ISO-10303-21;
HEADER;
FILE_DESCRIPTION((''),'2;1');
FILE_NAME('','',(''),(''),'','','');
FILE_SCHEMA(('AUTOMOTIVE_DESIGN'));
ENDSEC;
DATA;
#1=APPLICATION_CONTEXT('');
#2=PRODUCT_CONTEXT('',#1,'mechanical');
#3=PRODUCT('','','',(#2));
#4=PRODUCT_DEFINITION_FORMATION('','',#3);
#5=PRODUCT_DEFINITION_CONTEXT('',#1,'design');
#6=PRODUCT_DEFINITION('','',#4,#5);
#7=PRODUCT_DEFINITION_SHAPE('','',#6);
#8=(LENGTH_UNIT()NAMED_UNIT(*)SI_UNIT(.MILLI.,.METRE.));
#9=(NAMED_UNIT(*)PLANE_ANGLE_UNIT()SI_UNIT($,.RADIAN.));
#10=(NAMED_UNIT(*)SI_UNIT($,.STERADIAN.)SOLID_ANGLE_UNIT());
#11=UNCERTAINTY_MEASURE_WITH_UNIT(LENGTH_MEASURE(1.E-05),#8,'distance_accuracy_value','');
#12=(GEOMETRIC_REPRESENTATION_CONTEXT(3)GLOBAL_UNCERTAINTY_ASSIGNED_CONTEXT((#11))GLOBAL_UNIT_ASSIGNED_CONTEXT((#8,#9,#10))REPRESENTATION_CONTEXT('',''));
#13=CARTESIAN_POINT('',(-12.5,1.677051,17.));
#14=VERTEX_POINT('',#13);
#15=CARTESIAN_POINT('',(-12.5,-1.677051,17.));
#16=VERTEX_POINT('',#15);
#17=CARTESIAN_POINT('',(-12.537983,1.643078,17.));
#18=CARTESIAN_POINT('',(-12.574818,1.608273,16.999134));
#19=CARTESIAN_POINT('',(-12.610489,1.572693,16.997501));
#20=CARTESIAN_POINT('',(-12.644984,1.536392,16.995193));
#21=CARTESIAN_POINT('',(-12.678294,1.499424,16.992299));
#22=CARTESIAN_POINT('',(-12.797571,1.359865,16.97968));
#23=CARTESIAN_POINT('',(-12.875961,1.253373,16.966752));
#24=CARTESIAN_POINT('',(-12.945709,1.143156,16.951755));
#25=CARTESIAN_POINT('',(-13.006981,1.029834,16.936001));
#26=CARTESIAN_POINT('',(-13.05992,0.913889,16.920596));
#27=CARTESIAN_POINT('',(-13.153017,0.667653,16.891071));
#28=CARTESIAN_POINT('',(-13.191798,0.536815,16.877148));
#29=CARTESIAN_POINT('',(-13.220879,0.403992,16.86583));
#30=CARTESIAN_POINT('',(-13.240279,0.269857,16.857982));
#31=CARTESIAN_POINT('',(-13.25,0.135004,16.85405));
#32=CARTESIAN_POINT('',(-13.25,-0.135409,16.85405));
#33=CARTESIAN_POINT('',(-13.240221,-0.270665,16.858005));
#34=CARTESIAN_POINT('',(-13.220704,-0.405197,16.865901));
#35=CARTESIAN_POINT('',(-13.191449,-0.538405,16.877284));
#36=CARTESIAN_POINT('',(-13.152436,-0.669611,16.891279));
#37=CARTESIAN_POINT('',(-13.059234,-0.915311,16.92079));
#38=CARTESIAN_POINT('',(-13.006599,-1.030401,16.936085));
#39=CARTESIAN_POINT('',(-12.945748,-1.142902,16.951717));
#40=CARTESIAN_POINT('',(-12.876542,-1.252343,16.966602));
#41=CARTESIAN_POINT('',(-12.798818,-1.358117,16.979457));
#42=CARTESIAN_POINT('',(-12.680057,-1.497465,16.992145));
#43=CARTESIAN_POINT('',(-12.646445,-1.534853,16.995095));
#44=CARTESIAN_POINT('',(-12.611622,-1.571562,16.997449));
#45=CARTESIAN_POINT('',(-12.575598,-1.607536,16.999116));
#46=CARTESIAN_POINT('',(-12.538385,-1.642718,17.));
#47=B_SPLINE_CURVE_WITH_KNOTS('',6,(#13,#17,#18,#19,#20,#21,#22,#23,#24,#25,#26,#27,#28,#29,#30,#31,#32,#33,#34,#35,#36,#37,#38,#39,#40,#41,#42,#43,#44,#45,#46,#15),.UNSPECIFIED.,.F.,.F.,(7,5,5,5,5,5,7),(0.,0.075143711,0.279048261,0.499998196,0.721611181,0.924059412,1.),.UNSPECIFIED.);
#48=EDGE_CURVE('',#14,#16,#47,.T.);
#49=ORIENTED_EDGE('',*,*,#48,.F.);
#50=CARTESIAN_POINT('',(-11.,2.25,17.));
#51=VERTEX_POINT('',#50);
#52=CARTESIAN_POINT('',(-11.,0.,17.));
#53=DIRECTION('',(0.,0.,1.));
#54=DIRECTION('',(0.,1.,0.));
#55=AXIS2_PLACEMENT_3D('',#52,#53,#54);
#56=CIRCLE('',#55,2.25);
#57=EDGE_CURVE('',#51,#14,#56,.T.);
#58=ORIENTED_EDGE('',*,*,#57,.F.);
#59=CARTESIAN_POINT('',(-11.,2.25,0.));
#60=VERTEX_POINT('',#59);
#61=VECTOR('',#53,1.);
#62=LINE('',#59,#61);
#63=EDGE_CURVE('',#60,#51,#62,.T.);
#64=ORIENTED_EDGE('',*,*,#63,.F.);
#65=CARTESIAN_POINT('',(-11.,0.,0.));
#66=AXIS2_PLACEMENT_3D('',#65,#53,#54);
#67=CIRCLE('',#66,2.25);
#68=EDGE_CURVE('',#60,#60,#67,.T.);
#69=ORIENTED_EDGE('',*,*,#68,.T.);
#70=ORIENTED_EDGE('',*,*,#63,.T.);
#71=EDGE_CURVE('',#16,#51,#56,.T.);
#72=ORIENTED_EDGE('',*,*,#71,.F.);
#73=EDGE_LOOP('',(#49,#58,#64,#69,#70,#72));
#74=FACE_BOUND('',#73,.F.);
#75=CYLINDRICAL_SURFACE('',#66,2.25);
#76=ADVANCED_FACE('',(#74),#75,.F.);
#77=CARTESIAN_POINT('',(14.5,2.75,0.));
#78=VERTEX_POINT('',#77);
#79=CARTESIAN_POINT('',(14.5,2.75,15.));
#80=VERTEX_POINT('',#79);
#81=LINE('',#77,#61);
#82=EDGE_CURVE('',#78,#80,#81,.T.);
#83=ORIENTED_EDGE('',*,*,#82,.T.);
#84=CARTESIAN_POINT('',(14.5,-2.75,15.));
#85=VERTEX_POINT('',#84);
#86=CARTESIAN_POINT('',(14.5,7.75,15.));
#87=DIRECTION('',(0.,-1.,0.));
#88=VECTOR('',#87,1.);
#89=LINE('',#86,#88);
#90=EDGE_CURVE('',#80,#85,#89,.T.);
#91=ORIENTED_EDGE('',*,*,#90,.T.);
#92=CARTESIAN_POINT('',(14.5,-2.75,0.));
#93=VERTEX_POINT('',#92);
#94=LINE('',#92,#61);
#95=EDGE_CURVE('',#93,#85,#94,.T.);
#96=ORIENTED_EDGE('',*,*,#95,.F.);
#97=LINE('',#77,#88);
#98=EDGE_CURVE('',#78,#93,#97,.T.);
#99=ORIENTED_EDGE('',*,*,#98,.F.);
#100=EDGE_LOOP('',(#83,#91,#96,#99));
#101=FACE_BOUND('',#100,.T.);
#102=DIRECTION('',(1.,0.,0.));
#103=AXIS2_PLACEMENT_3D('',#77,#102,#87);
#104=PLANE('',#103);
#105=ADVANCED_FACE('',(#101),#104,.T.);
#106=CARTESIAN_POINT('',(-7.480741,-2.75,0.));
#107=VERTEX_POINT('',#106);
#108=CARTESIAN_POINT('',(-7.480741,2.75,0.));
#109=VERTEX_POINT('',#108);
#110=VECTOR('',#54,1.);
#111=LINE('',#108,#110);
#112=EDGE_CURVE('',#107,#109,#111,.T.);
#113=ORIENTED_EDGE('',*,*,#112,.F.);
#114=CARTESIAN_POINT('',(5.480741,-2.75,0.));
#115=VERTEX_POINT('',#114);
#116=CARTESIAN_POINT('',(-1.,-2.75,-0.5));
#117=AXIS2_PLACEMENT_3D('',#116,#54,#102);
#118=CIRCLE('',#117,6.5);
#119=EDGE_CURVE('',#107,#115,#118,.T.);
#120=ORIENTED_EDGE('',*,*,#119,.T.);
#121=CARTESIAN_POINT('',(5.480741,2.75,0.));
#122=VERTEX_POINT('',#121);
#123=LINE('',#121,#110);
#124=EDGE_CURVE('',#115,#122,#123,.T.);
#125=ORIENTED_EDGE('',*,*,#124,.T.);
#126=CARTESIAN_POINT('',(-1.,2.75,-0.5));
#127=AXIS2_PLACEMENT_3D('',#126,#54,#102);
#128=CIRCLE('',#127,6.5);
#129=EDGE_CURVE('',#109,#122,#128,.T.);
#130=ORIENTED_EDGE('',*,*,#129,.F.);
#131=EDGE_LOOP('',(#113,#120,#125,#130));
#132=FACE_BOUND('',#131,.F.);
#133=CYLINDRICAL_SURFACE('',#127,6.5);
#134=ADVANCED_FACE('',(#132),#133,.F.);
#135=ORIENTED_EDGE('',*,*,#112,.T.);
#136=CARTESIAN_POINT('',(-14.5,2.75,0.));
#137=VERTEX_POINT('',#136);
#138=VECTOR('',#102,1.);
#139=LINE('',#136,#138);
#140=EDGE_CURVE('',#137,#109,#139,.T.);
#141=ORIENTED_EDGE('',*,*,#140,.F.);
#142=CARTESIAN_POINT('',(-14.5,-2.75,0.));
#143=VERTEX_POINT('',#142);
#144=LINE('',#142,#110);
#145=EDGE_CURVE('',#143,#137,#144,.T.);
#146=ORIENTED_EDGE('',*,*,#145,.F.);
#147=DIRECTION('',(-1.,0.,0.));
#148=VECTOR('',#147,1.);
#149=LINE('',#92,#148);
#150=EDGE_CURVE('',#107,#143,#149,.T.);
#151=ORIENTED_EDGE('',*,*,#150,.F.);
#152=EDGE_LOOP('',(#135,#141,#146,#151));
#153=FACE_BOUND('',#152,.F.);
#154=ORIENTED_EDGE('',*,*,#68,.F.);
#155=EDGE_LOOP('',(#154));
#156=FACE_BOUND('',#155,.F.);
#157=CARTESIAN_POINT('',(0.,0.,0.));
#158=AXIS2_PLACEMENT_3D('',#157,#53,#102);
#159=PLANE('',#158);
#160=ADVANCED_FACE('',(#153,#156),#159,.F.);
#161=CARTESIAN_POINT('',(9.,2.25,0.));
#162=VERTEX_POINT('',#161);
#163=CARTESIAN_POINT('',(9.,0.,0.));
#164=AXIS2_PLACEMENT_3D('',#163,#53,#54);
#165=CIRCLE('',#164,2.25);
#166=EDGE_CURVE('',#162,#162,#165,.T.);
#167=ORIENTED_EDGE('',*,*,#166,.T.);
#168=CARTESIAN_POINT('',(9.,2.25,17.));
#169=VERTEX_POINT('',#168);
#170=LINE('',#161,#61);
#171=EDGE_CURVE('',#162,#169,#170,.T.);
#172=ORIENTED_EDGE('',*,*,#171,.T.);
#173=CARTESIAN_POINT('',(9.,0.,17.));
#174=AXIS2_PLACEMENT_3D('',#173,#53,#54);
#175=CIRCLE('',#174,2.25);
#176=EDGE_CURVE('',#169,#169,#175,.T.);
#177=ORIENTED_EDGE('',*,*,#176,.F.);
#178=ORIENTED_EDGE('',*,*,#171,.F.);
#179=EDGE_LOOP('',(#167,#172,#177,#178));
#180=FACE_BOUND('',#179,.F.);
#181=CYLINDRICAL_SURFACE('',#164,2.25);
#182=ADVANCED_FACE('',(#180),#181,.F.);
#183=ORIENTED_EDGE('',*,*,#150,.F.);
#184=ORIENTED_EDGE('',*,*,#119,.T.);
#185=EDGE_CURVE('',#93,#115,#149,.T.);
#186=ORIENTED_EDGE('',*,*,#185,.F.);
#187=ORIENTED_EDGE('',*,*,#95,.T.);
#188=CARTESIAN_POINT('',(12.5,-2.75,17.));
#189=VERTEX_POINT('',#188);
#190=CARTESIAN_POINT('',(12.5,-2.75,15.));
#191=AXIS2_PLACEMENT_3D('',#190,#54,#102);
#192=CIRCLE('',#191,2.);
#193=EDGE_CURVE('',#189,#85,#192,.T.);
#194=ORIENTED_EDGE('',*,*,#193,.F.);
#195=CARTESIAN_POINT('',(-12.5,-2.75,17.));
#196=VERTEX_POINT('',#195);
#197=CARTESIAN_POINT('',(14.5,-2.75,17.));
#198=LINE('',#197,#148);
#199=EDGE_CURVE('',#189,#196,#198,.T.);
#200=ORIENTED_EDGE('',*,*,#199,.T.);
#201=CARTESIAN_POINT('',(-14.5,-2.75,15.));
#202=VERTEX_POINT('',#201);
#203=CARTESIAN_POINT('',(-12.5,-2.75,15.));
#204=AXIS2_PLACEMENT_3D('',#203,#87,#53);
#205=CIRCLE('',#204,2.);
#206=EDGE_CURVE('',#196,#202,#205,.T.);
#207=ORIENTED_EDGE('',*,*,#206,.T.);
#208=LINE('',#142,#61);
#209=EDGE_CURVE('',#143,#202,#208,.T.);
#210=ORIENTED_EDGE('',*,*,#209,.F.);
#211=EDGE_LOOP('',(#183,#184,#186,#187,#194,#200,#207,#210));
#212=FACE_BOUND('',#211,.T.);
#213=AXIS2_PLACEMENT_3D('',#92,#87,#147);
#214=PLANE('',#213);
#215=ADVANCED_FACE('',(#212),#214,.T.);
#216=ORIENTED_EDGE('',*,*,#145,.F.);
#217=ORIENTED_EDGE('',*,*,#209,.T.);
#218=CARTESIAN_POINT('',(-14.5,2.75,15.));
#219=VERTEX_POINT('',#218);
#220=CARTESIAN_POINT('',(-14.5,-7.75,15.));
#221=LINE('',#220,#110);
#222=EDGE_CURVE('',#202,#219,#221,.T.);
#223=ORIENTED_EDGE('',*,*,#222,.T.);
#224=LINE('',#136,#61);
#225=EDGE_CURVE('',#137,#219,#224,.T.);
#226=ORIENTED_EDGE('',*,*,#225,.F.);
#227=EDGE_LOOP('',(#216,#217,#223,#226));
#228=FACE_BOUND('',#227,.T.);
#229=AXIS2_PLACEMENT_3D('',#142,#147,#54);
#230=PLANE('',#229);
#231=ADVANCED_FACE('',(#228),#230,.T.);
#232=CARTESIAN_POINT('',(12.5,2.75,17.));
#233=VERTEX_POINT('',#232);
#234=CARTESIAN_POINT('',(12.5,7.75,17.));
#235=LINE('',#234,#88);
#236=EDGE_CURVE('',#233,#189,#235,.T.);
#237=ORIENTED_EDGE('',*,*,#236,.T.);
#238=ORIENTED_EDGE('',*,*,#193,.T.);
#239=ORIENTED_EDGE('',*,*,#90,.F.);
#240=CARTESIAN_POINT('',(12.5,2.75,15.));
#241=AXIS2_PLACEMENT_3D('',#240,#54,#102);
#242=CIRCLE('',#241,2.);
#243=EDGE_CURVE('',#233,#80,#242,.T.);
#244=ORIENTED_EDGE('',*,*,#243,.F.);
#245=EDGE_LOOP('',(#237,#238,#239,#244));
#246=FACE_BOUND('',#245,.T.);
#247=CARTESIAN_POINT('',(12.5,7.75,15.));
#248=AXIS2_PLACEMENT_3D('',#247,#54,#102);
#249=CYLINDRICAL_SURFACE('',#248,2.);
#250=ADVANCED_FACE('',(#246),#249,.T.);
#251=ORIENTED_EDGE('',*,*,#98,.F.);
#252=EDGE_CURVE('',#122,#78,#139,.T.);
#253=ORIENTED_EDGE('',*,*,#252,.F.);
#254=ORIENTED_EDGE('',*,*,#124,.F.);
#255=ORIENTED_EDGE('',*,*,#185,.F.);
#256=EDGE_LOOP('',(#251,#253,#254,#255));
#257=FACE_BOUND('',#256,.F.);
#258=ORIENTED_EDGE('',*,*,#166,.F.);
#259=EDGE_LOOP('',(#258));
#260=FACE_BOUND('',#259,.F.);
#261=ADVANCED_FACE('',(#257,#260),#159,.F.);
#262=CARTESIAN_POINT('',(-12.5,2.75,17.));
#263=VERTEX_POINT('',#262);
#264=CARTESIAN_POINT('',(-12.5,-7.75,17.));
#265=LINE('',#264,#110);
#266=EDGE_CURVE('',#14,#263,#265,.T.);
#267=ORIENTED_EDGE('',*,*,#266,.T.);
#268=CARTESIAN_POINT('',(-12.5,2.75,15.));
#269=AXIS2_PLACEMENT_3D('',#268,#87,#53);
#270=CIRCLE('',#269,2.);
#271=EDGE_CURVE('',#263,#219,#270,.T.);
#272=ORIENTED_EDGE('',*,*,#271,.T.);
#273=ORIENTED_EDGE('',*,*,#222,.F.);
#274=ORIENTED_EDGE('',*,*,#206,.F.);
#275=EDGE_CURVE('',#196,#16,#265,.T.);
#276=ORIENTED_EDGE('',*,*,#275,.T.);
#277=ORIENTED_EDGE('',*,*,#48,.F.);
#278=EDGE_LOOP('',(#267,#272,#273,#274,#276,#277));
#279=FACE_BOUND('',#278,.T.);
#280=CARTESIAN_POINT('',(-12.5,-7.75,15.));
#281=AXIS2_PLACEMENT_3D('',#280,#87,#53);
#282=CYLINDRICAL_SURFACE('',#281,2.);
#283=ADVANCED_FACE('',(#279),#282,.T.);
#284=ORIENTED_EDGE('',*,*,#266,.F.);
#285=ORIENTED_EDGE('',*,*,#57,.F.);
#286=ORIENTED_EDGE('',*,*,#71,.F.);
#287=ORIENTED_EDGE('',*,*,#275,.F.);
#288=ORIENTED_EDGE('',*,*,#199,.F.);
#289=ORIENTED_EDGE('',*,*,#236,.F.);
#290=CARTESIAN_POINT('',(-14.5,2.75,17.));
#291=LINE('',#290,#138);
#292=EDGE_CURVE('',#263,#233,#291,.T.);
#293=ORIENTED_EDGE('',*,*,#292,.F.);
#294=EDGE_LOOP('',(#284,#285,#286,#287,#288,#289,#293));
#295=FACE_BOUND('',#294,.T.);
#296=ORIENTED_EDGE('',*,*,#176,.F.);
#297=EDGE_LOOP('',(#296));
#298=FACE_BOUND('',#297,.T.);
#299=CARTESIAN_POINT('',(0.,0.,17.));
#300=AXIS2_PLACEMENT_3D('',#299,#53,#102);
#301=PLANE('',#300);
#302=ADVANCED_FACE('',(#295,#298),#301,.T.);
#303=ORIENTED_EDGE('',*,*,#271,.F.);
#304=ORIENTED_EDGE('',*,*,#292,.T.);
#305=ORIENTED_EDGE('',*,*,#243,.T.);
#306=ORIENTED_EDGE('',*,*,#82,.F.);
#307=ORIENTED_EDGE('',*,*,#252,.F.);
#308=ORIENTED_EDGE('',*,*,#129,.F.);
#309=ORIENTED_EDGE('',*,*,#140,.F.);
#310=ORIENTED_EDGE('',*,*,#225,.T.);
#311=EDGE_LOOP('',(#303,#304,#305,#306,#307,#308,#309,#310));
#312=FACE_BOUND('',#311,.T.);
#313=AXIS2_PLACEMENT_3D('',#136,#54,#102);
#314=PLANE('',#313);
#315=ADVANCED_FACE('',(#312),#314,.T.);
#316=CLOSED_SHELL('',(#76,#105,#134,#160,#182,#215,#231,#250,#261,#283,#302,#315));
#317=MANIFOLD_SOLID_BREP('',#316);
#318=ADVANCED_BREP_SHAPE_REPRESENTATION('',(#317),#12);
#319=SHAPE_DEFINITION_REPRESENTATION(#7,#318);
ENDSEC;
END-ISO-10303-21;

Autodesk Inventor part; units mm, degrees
ref_plane "YZ Plane" through (0, 0, 0) normal (1, 0, 0) x (0, 1, 0)
ref_plane "XZ Plane" through (0, 0, 0) normal (0, 1, 0) x (-1, 0, 0)
ref_plane "XY Plane" through (0, 0, 0) normal (0, 0, 1) x (1, 0, 0)
sketch "Sketch1" plane through (0, 0, 0) normal (0, 0, 1) x (1, 0, 0)
  line L0 (-14.5, 2.75) -> (14.5, 2.75)
  line L1 (14.5, 2.75) -> (14.5, -2.75)
  line L2 (14.5, -2.75) -> (-14.5, -2.75)
  line L3 (-14.5, -2.75) -> (-14.5, 2.75)
  line L4 (-14.5, 2.75) -> (14.5, -2.75) construction
  line L5 (14.5, 2.75) -> (-14.5, -2.75) construction
  point P0 (0, 0)
  dimension "d0" = 29
  dimension "d1" = 5.5
extrude "Extrusion1" add sketch "Sketch1" along normal blind 17
sketch "Sketch2" plane through (-14.5, 2.75, 0) normal (0, 1, 0) x (1, 0, 0)
  circle A0 centre (13.5, 0.5) radius 6.5
  line L0 (0, 0) -> (0, -17) projected
  line L1 (29, -17) -> (0, -17) projected
  point P0 (19.9809, 0.0015)
  point P1 (7.0191, 0.0015)
  dimension "d5" = 13
  dimension "d6" = 13.5
  dimension "d10" = 17.5
extrude "Extrusion2" cut sketch "Sketch2" against normal through all
sketch "Sketch3" plane through (0, 0, 0) normal (0, 0, -1) x (-1, 0, 0)
  circle A0 centre (11, 0) radius 2.25
  line L0 (7.4807, -2.75) -> (14.5, -2.75) projected
  line L1 (14.5, -2.75) -> (14.5, 2.75) projected
  circle A1 centre (-9, 0) radius 2.25
  line L2 (-14.5, -2.75) -> (-5.4807, -2.75) projected
  point P0 (0, 0)
  dimension "d11" = 4.5
  dimension "d12" = 2.75
  dimension "d13" = 3.5
  dimension "d14" = 4.5
  dimension "d15" = 20
  dimension "d16" = 2.75
hole "Hole1" at (9, 0, 0) at (-11, 0, 0) direction (0, 0, 1) diameter 4.5 end through all
fillet "Fillet1" radius 2 2 edges at (-14.5, 0, 17) (14.5, 0, 17)
properties part number "CarroXY - HotendFrente"
